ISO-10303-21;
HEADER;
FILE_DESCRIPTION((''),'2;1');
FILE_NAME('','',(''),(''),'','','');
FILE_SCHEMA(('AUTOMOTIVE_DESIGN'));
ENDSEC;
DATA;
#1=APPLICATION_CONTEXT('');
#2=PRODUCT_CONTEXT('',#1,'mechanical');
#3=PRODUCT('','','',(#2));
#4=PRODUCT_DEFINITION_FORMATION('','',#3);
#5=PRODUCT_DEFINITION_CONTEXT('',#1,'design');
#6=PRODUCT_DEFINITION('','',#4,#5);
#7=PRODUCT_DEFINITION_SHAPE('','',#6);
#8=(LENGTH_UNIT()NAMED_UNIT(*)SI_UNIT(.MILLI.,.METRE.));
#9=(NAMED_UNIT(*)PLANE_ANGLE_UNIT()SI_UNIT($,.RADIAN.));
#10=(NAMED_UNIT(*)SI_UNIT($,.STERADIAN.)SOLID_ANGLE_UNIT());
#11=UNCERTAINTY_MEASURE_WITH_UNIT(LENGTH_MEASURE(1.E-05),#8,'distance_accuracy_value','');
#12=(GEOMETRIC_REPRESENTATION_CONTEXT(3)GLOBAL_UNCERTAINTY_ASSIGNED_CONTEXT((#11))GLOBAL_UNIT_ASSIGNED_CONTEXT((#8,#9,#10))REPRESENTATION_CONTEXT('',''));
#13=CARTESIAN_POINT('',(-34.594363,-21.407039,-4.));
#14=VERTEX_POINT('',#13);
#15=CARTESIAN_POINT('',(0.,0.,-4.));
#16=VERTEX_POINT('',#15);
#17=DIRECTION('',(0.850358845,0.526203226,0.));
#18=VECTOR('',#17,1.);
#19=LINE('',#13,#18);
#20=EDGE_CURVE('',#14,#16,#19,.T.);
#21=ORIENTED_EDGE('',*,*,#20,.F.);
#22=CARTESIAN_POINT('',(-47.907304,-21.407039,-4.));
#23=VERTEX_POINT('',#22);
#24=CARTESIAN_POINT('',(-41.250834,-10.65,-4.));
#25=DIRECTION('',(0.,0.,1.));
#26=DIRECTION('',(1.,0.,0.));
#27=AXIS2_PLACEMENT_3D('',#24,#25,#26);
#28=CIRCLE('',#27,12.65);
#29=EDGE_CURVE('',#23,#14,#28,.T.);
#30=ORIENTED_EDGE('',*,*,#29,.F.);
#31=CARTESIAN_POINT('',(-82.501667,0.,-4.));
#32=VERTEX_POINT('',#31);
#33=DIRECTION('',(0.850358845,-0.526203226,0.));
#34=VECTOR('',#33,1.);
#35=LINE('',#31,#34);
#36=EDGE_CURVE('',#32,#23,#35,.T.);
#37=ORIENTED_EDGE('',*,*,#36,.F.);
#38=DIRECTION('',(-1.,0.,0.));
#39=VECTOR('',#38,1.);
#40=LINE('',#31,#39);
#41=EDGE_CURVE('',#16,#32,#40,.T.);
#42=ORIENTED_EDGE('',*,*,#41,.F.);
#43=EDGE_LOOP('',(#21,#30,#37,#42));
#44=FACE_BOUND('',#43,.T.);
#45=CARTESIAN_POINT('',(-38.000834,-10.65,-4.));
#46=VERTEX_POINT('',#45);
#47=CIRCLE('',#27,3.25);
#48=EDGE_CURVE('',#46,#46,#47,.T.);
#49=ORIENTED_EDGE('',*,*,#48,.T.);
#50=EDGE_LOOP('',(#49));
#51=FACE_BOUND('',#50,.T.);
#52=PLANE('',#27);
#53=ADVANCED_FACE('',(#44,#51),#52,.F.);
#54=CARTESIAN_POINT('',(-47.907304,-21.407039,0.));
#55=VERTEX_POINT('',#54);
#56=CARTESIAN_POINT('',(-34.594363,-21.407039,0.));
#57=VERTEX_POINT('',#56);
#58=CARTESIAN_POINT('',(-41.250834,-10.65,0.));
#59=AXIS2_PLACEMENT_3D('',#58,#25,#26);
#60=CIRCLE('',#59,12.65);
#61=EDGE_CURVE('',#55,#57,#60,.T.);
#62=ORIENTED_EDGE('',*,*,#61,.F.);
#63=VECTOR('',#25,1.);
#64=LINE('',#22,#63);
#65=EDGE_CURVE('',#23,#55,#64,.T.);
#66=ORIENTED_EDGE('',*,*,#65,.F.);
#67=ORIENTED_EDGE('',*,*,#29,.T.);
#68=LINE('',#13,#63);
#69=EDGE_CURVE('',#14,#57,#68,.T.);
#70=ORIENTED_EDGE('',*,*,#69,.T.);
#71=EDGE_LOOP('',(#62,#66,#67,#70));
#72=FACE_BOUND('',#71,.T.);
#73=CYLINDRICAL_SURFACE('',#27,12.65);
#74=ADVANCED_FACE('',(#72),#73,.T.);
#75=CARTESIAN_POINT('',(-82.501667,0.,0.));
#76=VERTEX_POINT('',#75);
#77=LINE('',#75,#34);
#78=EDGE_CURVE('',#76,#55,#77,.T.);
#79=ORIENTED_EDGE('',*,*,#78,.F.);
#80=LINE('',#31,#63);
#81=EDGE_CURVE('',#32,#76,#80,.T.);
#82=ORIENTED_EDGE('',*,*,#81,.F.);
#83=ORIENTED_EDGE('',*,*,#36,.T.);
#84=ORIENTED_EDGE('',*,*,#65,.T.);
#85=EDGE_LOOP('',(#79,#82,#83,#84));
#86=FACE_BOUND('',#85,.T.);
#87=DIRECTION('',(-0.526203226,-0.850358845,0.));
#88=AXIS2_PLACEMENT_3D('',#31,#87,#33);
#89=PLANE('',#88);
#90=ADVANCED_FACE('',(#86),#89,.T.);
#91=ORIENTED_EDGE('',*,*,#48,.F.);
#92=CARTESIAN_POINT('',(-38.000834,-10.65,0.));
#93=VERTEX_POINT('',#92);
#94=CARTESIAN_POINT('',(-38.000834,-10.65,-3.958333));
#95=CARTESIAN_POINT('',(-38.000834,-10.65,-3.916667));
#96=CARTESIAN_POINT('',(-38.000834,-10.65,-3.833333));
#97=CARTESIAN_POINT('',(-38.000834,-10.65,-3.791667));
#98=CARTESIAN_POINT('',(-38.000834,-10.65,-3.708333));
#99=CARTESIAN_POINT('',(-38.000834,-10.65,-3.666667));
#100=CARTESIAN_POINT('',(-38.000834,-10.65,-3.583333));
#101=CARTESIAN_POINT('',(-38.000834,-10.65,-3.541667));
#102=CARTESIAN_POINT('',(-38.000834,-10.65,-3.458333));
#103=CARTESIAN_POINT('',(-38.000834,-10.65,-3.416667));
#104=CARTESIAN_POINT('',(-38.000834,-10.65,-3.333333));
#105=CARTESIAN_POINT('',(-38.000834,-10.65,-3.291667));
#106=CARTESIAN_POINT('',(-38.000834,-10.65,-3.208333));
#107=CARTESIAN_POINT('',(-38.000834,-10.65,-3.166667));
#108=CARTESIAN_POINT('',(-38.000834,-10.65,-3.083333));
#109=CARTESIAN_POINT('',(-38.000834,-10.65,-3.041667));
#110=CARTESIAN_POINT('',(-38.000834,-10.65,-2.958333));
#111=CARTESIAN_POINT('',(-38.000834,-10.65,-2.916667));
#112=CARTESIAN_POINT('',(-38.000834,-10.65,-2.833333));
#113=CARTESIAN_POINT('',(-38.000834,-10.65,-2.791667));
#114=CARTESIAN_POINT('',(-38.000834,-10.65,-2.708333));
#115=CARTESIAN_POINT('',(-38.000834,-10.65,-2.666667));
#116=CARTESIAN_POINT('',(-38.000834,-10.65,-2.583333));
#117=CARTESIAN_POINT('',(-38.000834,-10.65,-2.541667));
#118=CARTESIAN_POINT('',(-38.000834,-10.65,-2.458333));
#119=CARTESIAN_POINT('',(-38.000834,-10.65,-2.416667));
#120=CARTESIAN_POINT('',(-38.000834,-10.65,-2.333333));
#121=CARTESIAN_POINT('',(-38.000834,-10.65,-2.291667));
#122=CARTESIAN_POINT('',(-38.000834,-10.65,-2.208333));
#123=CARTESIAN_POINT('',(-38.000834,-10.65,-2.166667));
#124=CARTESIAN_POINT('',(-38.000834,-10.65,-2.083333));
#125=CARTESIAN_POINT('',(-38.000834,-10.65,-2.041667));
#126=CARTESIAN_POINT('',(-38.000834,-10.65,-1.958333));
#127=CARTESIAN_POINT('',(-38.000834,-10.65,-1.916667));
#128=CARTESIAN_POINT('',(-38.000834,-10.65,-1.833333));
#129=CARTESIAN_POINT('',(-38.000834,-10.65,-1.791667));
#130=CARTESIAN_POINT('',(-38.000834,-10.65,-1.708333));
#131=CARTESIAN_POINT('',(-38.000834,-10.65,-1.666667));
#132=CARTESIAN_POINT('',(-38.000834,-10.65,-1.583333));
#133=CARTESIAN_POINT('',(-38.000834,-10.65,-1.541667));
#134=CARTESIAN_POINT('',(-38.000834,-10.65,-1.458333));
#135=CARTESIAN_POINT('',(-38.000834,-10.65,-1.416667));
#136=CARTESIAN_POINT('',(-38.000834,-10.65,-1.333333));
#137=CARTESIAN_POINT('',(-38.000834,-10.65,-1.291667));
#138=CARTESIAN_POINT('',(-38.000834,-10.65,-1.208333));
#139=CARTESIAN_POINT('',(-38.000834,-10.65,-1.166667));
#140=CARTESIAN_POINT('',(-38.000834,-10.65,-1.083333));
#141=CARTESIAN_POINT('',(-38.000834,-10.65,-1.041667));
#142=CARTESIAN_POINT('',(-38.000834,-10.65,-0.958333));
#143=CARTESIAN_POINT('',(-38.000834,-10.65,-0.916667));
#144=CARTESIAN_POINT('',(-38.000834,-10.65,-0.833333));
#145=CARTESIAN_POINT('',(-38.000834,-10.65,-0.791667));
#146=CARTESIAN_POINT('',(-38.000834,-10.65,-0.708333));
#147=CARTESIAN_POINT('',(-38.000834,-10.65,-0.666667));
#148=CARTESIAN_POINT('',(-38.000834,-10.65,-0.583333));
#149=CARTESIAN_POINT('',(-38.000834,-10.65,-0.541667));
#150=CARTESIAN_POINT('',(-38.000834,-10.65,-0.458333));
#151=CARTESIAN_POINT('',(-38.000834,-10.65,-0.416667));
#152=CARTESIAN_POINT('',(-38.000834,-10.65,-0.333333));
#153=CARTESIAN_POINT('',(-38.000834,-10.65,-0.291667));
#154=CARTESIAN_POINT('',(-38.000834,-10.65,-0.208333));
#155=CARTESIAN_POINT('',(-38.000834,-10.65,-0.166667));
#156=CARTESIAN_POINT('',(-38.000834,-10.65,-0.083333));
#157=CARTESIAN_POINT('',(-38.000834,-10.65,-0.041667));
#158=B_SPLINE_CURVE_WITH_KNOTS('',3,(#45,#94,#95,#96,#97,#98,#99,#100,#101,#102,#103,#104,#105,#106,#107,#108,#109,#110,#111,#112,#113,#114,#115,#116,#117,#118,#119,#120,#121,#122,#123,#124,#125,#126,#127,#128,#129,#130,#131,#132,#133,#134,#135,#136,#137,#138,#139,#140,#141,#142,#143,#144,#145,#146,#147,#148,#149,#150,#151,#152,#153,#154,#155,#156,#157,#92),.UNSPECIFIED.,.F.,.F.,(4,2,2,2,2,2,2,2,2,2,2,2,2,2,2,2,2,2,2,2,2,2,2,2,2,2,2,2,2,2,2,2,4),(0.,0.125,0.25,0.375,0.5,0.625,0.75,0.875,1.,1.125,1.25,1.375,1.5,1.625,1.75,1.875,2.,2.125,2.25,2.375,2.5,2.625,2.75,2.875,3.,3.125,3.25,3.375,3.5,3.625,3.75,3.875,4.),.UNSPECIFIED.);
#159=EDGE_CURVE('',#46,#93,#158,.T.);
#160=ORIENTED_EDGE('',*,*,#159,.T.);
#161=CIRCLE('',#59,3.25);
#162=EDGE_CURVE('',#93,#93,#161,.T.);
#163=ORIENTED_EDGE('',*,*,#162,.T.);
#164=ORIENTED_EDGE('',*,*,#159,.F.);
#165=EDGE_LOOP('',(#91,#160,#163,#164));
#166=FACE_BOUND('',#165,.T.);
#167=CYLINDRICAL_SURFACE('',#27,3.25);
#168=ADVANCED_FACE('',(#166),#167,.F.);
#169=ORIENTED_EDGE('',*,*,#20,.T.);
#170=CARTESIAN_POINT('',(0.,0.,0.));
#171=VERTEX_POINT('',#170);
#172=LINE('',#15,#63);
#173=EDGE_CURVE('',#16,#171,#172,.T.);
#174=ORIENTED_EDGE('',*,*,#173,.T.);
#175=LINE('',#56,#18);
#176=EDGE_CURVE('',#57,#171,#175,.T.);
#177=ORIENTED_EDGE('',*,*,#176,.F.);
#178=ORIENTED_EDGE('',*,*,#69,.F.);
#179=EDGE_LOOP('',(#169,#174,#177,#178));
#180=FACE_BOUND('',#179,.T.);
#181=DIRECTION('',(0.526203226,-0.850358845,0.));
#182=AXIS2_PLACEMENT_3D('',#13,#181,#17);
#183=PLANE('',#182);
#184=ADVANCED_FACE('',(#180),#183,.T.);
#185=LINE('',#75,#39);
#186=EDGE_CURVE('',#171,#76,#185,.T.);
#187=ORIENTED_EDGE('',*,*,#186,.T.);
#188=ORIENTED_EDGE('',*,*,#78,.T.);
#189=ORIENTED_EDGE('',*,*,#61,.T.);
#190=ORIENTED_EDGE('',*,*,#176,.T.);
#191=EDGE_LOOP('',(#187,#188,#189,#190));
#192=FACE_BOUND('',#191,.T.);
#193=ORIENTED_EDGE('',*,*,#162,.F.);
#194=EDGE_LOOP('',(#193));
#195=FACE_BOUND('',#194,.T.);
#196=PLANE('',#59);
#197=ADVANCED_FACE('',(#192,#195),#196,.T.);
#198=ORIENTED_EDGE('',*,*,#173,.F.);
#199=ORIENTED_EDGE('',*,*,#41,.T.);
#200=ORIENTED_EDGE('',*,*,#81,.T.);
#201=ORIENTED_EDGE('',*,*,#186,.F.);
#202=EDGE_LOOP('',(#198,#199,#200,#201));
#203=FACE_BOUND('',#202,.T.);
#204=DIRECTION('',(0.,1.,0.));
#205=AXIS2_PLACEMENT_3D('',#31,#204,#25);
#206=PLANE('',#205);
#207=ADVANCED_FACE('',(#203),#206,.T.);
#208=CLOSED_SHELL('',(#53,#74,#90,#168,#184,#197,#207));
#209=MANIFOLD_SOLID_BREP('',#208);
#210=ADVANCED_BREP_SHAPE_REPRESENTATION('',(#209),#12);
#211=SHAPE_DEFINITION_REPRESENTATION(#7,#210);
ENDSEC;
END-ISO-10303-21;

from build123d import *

# Parameters (mm, degrees)
SKETCH_1_R             = 3.25
SM_BASE_FLANGE_1_DEPTH = 4


# Sheet-metal steps are written as plain solids
with BuildPart() as part:
    # Sketch 1 → Базовая кромка1 (new body)
    with BuildSketch(Plane.XY):
        with BuildLine():
            Line((-82.501667048, 0), (-47.907304338, -21.407039383))
            ThreePointArc((-47.907304338, -21.407039383), (-41.250833524, -23.3), (-34.594362709, -21.407039383))
            Line((-34.594362709, -21.407039383), (0, 0))
            Line((0, 0), (-82.501667048, 0))
        make_face()
        with Locations((-41.250833524, -10.65)):
            Circle(SKETCH_1_R, mode=Mode.SUBTRACT)
    extrude(amount=-SM_BASE_FLANGE_1_DEPTH)


solid = part.part
